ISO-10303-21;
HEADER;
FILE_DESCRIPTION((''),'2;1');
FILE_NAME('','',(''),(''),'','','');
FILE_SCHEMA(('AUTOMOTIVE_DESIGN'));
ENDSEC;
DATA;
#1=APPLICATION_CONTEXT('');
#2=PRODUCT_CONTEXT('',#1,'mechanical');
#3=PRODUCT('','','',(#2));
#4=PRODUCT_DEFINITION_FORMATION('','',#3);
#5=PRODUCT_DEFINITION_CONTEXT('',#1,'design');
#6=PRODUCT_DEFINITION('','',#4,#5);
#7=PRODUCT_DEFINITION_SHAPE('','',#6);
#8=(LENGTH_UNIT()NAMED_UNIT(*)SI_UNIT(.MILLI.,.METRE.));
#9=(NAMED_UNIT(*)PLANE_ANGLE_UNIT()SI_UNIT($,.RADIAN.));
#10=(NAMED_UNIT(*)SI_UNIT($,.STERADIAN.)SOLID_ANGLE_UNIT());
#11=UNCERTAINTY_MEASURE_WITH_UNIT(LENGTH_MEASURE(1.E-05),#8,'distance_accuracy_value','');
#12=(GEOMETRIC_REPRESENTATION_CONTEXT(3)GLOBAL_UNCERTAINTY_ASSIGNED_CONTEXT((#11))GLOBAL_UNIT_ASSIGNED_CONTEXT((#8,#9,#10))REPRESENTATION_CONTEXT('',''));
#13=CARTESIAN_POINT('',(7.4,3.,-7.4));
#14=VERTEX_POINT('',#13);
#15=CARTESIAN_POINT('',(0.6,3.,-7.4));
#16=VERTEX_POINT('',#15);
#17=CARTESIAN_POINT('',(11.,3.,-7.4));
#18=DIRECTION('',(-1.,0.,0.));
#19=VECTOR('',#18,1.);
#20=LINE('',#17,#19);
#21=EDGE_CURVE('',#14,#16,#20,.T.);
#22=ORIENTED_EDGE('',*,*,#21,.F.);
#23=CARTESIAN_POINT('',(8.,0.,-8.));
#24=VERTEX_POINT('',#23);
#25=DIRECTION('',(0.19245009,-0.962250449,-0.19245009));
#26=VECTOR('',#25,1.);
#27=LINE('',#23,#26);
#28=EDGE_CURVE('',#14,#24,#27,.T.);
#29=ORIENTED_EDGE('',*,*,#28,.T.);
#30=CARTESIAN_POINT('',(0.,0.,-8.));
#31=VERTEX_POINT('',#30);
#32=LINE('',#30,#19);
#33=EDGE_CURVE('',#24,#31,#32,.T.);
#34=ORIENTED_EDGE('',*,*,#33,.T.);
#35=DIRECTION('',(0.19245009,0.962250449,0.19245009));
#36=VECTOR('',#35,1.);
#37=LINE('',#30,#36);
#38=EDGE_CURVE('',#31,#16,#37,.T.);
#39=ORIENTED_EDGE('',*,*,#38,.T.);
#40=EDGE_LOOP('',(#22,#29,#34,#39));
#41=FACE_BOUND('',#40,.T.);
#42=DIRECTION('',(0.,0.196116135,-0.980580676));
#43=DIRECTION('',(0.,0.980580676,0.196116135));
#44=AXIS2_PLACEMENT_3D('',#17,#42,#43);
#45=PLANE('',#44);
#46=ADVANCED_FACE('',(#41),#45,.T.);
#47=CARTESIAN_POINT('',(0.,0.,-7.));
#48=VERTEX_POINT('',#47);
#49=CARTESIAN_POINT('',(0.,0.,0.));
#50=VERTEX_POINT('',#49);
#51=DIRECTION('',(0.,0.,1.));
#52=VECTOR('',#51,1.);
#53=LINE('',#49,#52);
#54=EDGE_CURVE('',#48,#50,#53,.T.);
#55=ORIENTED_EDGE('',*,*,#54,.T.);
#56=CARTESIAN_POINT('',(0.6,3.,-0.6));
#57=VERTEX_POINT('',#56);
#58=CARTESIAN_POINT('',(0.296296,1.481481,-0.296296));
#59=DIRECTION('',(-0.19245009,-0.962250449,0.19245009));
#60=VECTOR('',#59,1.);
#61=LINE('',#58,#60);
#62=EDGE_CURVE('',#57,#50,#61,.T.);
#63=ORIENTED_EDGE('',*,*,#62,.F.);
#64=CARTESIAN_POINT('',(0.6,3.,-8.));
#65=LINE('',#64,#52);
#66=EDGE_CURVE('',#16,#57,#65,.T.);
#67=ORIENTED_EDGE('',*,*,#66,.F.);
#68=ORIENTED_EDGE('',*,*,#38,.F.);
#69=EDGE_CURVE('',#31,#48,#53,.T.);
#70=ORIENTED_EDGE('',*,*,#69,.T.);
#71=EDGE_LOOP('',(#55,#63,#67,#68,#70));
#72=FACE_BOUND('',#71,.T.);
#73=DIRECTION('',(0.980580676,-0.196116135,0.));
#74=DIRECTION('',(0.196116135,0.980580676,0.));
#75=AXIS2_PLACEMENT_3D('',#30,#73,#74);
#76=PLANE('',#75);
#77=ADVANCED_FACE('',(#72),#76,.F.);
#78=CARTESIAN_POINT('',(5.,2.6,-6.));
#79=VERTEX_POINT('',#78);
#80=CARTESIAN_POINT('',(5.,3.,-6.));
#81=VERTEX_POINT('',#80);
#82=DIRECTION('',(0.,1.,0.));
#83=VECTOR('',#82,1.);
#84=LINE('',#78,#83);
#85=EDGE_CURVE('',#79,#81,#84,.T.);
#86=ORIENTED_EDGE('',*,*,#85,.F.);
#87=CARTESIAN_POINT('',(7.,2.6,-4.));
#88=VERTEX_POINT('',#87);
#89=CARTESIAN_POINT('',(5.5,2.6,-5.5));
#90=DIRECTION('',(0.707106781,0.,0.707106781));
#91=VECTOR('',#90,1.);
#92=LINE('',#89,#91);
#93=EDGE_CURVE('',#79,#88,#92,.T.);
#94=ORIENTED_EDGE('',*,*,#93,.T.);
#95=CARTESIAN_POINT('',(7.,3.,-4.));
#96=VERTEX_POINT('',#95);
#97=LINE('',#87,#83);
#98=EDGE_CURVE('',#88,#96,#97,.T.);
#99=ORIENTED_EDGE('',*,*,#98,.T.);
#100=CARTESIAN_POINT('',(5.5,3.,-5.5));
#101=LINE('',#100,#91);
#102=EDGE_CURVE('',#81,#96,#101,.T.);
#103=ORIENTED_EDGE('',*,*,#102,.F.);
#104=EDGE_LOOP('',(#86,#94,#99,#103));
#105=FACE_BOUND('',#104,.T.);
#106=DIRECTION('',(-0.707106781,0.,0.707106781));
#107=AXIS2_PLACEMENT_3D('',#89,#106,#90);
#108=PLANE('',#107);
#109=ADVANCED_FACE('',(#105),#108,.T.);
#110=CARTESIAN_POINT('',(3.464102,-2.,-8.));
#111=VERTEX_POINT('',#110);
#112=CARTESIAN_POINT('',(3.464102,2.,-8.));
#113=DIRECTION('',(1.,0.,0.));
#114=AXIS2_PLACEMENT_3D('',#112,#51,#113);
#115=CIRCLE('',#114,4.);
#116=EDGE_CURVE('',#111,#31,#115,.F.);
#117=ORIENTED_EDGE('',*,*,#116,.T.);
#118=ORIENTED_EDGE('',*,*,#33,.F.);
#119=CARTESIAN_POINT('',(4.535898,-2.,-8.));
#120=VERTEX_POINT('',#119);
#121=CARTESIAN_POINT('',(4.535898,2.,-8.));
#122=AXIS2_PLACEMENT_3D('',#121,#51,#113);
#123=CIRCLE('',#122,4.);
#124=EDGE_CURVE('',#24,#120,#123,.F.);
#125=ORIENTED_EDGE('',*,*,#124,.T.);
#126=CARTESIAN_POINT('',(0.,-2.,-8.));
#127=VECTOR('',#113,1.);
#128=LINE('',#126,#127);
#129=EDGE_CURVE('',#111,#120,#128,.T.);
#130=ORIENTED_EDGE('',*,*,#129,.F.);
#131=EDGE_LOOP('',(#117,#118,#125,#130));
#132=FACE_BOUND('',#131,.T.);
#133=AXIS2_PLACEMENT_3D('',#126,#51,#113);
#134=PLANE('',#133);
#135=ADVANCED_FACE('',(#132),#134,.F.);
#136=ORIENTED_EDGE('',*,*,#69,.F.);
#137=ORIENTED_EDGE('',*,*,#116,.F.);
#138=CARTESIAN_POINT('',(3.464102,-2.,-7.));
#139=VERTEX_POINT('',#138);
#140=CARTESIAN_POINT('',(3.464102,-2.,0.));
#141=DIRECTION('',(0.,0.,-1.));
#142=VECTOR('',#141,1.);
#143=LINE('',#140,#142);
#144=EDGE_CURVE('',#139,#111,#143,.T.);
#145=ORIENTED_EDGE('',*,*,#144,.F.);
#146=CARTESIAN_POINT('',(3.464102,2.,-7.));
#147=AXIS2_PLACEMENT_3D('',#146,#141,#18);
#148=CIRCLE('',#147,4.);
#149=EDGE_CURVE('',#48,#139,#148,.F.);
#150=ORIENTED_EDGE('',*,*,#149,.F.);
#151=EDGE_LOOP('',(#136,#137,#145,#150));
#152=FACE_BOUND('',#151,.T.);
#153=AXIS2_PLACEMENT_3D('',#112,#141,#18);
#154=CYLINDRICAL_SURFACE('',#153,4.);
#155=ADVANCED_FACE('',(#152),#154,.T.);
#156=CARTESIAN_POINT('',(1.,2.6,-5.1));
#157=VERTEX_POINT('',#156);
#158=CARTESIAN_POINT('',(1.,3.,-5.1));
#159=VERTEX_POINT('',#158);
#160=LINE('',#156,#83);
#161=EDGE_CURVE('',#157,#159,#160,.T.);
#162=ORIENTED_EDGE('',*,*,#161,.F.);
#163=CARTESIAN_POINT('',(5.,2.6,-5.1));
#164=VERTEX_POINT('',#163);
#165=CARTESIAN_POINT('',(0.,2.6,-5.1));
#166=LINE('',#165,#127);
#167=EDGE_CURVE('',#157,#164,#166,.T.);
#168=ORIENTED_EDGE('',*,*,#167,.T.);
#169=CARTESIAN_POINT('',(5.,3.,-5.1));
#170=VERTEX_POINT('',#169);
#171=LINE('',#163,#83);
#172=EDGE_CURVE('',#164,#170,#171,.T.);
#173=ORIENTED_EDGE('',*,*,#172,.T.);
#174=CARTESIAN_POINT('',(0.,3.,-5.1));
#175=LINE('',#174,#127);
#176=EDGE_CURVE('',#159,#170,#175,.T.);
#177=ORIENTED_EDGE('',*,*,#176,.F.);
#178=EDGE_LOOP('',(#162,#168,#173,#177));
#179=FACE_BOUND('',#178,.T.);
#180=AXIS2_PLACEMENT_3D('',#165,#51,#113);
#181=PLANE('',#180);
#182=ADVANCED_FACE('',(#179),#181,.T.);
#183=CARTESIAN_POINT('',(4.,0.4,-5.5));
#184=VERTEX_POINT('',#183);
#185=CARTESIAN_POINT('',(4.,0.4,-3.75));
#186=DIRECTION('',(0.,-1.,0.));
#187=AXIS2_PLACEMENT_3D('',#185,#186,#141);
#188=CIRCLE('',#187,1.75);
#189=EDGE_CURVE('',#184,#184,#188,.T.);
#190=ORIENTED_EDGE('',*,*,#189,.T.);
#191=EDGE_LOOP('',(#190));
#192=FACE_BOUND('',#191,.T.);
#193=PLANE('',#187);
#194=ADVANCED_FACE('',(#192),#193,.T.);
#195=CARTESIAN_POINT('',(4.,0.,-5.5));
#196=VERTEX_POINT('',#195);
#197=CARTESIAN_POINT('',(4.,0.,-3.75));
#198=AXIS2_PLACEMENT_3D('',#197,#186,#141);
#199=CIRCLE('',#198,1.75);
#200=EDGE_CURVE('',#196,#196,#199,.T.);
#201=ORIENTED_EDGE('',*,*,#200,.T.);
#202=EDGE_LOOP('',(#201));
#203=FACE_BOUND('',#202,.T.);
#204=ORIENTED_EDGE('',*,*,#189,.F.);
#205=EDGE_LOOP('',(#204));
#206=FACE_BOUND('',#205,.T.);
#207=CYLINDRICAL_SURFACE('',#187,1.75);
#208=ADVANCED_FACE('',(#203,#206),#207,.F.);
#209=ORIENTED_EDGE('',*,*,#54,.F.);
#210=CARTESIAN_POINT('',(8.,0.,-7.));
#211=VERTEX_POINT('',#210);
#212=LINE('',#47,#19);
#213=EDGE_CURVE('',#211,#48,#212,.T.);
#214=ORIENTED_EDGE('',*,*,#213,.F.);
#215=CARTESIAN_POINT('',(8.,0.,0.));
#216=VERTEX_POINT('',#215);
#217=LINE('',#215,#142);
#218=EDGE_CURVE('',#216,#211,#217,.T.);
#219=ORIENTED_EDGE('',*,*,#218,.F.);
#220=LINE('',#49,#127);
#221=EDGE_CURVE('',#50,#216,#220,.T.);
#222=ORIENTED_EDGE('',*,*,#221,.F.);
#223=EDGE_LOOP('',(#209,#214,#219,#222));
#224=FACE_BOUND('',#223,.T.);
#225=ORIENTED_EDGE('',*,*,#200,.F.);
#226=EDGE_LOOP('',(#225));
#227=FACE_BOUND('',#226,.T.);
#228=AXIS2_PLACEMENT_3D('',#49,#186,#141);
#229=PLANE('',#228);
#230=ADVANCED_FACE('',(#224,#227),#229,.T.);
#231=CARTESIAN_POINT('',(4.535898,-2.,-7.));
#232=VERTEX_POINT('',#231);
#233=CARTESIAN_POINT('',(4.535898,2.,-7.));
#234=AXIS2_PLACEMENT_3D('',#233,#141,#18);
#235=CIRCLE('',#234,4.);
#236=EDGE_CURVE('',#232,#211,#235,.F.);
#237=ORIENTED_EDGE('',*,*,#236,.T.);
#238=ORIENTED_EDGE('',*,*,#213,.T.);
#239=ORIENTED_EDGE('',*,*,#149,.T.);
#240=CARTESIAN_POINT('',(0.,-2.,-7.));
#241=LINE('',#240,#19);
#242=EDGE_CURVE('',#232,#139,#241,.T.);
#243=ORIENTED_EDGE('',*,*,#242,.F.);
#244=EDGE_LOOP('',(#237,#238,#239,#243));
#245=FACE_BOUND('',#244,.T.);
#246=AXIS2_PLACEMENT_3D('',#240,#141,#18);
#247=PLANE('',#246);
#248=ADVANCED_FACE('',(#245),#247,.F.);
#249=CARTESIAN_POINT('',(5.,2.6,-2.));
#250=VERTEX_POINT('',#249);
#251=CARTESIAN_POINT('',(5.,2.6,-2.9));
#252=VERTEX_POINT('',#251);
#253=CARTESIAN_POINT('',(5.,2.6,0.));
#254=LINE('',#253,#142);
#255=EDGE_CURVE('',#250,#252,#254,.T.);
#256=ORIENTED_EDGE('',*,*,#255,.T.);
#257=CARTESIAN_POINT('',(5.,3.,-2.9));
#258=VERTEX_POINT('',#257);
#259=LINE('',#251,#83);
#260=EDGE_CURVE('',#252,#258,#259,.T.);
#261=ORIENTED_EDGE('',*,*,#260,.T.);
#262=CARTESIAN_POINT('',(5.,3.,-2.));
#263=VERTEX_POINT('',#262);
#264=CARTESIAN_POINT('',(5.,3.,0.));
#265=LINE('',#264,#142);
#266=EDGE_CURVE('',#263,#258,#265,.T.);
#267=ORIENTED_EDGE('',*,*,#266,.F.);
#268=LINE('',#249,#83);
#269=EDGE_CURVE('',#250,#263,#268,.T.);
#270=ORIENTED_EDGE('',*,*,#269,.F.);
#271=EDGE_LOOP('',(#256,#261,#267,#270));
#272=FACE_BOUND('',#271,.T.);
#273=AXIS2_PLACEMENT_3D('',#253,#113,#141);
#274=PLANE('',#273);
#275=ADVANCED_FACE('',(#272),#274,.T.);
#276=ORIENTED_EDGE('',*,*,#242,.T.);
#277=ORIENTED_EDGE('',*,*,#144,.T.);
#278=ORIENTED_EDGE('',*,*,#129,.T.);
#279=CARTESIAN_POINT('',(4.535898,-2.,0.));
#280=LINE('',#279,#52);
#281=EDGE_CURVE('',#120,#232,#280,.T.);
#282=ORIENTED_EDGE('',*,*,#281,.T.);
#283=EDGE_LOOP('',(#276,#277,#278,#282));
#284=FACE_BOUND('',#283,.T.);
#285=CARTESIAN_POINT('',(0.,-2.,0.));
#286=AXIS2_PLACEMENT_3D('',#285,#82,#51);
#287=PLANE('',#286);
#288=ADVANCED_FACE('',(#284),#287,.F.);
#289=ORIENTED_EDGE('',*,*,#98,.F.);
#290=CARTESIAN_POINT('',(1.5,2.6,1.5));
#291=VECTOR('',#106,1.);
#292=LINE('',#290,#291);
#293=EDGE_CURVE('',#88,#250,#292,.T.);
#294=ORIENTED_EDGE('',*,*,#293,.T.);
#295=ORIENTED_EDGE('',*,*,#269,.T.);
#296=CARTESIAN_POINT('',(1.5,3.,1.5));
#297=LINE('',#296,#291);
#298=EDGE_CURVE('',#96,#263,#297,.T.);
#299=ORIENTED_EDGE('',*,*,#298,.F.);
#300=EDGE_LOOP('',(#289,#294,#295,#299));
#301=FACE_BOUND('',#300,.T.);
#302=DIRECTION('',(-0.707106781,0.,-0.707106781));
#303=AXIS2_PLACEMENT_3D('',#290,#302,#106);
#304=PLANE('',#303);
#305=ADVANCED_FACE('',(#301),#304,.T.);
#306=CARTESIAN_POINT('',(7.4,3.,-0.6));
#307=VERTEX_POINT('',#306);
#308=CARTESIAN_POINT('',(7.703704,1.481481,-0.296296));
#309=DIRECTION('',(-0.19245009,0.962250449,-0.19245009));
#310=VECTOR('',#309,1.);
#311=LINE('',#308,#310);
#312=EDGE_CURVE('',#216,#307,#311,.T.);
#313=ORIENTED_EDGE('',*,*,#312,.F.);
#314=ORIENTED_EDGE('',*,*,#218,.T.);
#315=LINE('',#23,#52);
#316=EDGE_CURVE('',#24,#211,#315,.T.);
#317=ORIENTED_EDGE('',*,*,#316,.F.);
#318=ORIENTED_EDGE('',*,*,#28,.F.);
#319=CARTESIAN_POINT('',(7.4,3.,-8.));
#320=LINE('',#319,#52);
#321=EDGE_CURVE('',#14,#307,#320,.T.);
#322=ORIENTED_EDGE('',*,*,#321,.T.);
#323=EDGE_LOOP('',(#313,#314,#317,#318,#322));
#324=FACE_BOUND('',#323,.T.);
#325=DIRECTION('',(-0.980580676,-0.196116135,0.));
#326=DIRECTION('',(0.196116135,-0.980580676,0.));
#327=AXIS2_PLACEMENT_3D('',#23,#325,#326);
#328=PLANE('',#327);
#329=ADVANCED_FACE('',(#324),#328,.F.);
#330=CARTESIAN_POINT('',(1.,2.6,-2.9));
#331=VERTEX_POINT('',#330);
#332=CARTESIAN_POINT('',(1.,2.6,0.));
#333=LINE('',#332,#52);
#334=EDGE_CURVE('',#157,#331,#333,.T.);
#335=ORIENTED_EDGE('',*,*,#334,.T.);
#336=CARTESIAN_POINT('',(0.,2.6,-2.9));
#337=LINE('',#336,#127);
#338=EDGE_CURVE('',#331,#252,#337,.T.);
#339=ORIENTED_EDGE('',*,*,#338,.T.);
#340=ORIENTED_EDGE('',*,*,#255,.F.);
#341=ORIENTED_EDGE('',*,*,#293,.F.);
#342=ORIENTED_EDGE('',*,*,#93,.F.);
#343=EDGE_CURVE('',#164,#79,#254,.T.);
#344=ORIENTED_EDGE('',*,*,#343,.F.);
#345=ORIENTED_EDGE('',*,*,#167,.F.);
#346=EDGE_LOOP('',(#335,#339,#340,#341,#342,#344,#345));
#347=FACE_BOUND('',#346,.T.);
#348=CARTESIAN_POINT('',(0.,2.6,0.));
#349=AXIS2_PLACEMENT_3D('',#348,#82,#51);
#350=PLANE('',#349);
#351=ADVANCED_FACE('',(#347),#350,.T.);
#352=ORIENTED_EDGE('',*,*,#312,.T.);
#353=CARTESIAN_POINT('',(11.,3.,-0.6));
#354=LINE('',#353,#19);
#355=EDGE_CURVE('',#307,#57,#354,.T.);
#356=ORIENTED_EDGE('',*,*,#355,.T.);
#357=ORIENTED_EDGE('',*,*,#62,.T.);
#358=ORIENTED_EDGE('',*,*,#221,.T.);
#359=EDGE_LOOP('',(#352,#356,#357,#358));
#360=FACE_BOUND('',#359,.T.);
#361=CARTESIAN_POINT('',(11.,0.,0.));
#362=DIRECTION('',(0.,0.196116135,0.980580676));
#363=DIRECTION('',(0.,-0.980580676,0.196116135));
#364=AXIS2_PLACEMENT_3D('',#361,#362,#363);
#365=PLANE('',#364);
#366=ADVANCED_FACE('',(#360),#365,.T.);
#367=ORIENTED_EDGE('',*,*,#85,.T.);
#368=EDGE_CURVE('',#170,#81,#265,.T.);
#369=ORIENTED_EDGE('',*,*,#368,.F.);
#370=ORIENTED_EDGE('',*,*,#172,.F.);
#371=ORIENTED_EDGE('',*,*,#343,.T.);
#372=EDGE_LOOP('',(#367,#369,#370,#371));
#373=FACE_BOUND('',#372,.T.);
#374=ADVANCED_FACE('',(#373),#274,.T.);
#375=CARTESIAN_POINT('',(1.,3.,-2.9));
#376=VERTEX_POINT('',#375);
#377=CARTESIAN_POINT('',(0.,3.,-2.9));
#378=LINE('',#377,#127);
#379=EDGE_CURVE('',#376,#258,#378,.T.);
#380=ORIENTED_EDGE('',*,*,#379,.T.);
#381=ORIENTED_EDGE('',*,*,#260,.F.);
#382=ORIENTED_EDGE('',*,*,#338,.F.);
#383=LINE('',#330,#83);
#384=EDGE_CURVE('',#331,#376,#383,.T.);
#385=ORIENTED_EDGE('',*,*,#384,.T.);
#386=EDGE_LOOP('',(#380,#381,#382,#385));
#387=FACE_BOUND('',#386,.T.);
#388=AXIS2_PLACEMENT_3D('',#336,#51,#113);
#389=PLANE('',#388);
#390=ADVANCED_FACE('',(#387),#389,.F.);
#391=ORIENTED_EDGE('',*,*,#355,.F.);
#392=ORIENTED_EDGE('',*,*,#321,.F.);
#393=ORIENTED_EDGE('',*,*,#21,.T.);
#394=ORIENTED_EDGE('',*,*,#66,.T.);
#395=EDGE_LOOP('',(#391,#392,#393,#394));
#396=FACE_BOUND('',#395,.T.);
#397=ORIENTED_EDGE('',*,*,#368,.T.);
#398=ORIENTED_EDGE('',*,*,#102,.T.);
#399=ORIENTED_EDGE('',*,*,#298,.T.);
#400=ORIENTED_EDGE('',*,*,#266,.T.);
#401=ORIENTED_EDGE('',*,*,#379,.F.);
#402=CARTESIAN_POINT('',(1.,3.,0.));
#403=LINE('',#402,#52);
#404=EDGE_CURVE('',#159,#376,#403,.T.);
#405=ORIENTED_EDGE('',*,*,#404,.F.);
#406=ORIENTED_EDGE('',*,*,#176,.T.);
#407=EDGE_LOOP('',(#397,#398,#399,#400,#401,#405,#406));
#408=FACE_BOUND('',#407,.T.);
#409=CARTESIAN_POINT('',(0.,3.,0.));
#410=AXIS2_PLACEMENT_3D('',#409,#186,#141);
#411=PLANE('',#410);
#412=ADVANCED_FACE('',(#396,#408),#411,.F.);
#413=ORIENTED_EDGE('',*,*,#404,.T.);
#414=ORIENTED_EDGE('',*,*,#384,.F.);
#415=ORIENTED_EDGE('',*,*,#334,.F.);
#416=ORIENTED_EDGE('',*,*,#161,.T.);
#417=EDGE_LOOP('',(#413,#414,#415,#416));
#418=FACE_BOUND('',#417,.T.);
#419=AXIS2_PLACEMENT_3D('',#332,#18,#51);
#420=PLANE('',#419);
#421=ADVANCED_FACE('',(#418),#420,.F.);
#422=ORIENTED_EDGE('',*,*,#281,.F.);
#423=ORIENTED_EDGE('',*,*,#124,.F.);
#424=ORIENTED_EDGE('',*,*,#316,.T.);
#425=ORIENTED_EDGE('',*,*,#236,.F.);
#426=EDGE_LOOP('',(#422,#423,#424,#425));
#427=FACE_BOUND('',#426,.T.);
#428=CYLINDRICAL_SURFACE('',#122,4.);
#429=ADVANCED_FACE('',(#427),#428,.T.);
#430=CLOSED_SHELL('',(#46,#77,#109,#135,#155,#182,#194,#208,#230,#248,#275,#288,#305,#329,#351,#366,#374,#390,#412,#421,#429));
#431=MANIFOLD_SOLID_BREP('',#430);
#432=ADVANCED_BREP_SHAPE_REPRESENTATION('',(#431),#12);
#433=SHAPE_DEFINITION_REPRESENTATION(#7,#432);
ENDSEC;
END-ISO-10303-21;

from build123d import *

# Parameters (mm, degrees)
SKETCH1_W               = 8
SKETCH1_H               = 8
BOSS_EXTRUDE1_DEPTH     = 3
CUT_EXTRUDE1_DEPTH      = 12.704699911
CUT_EXTRUDE1_DEPTH_BACK = 12.704699911
CUT_EXTRUDE2_DEPTH      = 11
SKETCH4_R               = 1.75
CUT_EXTRUDE3_DEPTH      = 0.4
SKETCH5_W               = 8
SKETCH5_H               = 1
BOSS_EXTRUDE2_DEPTH     = 2
FILLET1_R               = 4
SKETCH6_W               = 4
SKETCH6_H               = 2.2
CUT_EXTRUDE4_DEPTH      = 0.4


with BuildPart() as part:
    # Sketch1 → Boss-Extrude1 (new body)
    with BuildSketch(Plane(origin=(0, 0, 0), x_dir=(1, 0, 0), z_dir=(0, 1, 0))):
        with Locations((4, 4)):
            Rectangle(SKETCH1_W, SKETCH1_H)
    extrude(amount=BOSS_EXTRUDE1_DEPTH)

    # Sketch2 → Cut-Extrude1 (cut, two sides: drawn at the far end of the back side and taken through both)
    with BuildSketch(Plane.XY.offset(-CUT_EXTRUDE1_DEPTH_BACK)):
        Polygon((0, 0), (0.6, 3), (0, 3), align=None)
        Polygon((8, 0), (7.4, 3), (8, 3), align=None)
    extrude(amount=CUT_EXTRUDE1_DEPTH + CUT_EXTRUDE1_DEPTH_BACK, mode=Mode.SUBTRACT)

    # Sketch3 → Cut-Extrude2 (cut)
    with BuildSketch(Plane(origin=(0, 0, 0), x_dir=(0, 0, -1), z_dir=(1, 0, 0))):
        Polygon((0, 0), (0.6, 3), (0, 3), align=None)
        Polygon((8, 3), (7.4, 3), (8, 0), align=None)
    extrude(amount=CUT_EXTRUDE2_DEPTH, mode=Mode.SUBTRACT)

    # Sketch4 → Cut-Extrude3 (cut)
    with BuildSketch(Plane.XZ):
        with Locations(Location((4, -3.75, 0), (0, 0, 270))):
            Circle(SKETCH4_R)
    extrude(amount=-CUT_EXTRUDE3_DEPTH, mode=Mode.SUBTRACT)

    # Sketch5 → Boss-Extrude2 (add)
    with BuildSketch(Plane.XZ):
        with Locations((4, -7.5)):
            Rectangle(SKETCH5_W, SKETCH5_H)
    extrude(amount=BOSS_EXTRUDE2_DEPTH)

    # Fillet1
    # the kernel refuses this fillet: 4 mm, written as the material it takes off along each edge
    with BuildSketch(Plane(origin=(8, -2, -16.660254038), x_dir=(0, 1, 0), z_dir=(0, 0, 1)), Plane(origin=(0, -2, 1.660254038), x_dir=(0, 1, 0), z_dir=(0, 0, -1))) as fillet1_piece_1:
        with BuildLine():
            CenterArc((4, 3.464101615), FILLET1_R, 180, 60)
            Line((0, 3.464101615), (-0.08, 3.464101615))
            Line((-0.08, 3.464101615), (-0.08, 0))
            Line((-0.08, 0), (0, -0.08))
            ThreePointArc((0, -0.08), (1, -0.08), (1.96, -0.069282032))
            Line((1.96, -0.069282032), (2, 0))
        make_face()
    extrude(amount=18.320508076, mode=Mode.SUBTRACT)

    # Sketch6 → Cut-Extrude4 (cut)
    with BuildSketch(Plane(origin=(0, 3, 0), x_dir=(1, 0, 0), z_dir=(0, 1, 0))):
        with Locations((3, 4)):
            Rectangle(SKETCH6_W, SKETCH6_H)
        Polygon((5, 2), (5, 2.9), (5, 5.1), (5, 6), (7, 4), align=None)
    extrude(amount=-CUT_EXTRUDE4_DEPTH, mode=Mode.SUBTRACT)


solid = part.part
